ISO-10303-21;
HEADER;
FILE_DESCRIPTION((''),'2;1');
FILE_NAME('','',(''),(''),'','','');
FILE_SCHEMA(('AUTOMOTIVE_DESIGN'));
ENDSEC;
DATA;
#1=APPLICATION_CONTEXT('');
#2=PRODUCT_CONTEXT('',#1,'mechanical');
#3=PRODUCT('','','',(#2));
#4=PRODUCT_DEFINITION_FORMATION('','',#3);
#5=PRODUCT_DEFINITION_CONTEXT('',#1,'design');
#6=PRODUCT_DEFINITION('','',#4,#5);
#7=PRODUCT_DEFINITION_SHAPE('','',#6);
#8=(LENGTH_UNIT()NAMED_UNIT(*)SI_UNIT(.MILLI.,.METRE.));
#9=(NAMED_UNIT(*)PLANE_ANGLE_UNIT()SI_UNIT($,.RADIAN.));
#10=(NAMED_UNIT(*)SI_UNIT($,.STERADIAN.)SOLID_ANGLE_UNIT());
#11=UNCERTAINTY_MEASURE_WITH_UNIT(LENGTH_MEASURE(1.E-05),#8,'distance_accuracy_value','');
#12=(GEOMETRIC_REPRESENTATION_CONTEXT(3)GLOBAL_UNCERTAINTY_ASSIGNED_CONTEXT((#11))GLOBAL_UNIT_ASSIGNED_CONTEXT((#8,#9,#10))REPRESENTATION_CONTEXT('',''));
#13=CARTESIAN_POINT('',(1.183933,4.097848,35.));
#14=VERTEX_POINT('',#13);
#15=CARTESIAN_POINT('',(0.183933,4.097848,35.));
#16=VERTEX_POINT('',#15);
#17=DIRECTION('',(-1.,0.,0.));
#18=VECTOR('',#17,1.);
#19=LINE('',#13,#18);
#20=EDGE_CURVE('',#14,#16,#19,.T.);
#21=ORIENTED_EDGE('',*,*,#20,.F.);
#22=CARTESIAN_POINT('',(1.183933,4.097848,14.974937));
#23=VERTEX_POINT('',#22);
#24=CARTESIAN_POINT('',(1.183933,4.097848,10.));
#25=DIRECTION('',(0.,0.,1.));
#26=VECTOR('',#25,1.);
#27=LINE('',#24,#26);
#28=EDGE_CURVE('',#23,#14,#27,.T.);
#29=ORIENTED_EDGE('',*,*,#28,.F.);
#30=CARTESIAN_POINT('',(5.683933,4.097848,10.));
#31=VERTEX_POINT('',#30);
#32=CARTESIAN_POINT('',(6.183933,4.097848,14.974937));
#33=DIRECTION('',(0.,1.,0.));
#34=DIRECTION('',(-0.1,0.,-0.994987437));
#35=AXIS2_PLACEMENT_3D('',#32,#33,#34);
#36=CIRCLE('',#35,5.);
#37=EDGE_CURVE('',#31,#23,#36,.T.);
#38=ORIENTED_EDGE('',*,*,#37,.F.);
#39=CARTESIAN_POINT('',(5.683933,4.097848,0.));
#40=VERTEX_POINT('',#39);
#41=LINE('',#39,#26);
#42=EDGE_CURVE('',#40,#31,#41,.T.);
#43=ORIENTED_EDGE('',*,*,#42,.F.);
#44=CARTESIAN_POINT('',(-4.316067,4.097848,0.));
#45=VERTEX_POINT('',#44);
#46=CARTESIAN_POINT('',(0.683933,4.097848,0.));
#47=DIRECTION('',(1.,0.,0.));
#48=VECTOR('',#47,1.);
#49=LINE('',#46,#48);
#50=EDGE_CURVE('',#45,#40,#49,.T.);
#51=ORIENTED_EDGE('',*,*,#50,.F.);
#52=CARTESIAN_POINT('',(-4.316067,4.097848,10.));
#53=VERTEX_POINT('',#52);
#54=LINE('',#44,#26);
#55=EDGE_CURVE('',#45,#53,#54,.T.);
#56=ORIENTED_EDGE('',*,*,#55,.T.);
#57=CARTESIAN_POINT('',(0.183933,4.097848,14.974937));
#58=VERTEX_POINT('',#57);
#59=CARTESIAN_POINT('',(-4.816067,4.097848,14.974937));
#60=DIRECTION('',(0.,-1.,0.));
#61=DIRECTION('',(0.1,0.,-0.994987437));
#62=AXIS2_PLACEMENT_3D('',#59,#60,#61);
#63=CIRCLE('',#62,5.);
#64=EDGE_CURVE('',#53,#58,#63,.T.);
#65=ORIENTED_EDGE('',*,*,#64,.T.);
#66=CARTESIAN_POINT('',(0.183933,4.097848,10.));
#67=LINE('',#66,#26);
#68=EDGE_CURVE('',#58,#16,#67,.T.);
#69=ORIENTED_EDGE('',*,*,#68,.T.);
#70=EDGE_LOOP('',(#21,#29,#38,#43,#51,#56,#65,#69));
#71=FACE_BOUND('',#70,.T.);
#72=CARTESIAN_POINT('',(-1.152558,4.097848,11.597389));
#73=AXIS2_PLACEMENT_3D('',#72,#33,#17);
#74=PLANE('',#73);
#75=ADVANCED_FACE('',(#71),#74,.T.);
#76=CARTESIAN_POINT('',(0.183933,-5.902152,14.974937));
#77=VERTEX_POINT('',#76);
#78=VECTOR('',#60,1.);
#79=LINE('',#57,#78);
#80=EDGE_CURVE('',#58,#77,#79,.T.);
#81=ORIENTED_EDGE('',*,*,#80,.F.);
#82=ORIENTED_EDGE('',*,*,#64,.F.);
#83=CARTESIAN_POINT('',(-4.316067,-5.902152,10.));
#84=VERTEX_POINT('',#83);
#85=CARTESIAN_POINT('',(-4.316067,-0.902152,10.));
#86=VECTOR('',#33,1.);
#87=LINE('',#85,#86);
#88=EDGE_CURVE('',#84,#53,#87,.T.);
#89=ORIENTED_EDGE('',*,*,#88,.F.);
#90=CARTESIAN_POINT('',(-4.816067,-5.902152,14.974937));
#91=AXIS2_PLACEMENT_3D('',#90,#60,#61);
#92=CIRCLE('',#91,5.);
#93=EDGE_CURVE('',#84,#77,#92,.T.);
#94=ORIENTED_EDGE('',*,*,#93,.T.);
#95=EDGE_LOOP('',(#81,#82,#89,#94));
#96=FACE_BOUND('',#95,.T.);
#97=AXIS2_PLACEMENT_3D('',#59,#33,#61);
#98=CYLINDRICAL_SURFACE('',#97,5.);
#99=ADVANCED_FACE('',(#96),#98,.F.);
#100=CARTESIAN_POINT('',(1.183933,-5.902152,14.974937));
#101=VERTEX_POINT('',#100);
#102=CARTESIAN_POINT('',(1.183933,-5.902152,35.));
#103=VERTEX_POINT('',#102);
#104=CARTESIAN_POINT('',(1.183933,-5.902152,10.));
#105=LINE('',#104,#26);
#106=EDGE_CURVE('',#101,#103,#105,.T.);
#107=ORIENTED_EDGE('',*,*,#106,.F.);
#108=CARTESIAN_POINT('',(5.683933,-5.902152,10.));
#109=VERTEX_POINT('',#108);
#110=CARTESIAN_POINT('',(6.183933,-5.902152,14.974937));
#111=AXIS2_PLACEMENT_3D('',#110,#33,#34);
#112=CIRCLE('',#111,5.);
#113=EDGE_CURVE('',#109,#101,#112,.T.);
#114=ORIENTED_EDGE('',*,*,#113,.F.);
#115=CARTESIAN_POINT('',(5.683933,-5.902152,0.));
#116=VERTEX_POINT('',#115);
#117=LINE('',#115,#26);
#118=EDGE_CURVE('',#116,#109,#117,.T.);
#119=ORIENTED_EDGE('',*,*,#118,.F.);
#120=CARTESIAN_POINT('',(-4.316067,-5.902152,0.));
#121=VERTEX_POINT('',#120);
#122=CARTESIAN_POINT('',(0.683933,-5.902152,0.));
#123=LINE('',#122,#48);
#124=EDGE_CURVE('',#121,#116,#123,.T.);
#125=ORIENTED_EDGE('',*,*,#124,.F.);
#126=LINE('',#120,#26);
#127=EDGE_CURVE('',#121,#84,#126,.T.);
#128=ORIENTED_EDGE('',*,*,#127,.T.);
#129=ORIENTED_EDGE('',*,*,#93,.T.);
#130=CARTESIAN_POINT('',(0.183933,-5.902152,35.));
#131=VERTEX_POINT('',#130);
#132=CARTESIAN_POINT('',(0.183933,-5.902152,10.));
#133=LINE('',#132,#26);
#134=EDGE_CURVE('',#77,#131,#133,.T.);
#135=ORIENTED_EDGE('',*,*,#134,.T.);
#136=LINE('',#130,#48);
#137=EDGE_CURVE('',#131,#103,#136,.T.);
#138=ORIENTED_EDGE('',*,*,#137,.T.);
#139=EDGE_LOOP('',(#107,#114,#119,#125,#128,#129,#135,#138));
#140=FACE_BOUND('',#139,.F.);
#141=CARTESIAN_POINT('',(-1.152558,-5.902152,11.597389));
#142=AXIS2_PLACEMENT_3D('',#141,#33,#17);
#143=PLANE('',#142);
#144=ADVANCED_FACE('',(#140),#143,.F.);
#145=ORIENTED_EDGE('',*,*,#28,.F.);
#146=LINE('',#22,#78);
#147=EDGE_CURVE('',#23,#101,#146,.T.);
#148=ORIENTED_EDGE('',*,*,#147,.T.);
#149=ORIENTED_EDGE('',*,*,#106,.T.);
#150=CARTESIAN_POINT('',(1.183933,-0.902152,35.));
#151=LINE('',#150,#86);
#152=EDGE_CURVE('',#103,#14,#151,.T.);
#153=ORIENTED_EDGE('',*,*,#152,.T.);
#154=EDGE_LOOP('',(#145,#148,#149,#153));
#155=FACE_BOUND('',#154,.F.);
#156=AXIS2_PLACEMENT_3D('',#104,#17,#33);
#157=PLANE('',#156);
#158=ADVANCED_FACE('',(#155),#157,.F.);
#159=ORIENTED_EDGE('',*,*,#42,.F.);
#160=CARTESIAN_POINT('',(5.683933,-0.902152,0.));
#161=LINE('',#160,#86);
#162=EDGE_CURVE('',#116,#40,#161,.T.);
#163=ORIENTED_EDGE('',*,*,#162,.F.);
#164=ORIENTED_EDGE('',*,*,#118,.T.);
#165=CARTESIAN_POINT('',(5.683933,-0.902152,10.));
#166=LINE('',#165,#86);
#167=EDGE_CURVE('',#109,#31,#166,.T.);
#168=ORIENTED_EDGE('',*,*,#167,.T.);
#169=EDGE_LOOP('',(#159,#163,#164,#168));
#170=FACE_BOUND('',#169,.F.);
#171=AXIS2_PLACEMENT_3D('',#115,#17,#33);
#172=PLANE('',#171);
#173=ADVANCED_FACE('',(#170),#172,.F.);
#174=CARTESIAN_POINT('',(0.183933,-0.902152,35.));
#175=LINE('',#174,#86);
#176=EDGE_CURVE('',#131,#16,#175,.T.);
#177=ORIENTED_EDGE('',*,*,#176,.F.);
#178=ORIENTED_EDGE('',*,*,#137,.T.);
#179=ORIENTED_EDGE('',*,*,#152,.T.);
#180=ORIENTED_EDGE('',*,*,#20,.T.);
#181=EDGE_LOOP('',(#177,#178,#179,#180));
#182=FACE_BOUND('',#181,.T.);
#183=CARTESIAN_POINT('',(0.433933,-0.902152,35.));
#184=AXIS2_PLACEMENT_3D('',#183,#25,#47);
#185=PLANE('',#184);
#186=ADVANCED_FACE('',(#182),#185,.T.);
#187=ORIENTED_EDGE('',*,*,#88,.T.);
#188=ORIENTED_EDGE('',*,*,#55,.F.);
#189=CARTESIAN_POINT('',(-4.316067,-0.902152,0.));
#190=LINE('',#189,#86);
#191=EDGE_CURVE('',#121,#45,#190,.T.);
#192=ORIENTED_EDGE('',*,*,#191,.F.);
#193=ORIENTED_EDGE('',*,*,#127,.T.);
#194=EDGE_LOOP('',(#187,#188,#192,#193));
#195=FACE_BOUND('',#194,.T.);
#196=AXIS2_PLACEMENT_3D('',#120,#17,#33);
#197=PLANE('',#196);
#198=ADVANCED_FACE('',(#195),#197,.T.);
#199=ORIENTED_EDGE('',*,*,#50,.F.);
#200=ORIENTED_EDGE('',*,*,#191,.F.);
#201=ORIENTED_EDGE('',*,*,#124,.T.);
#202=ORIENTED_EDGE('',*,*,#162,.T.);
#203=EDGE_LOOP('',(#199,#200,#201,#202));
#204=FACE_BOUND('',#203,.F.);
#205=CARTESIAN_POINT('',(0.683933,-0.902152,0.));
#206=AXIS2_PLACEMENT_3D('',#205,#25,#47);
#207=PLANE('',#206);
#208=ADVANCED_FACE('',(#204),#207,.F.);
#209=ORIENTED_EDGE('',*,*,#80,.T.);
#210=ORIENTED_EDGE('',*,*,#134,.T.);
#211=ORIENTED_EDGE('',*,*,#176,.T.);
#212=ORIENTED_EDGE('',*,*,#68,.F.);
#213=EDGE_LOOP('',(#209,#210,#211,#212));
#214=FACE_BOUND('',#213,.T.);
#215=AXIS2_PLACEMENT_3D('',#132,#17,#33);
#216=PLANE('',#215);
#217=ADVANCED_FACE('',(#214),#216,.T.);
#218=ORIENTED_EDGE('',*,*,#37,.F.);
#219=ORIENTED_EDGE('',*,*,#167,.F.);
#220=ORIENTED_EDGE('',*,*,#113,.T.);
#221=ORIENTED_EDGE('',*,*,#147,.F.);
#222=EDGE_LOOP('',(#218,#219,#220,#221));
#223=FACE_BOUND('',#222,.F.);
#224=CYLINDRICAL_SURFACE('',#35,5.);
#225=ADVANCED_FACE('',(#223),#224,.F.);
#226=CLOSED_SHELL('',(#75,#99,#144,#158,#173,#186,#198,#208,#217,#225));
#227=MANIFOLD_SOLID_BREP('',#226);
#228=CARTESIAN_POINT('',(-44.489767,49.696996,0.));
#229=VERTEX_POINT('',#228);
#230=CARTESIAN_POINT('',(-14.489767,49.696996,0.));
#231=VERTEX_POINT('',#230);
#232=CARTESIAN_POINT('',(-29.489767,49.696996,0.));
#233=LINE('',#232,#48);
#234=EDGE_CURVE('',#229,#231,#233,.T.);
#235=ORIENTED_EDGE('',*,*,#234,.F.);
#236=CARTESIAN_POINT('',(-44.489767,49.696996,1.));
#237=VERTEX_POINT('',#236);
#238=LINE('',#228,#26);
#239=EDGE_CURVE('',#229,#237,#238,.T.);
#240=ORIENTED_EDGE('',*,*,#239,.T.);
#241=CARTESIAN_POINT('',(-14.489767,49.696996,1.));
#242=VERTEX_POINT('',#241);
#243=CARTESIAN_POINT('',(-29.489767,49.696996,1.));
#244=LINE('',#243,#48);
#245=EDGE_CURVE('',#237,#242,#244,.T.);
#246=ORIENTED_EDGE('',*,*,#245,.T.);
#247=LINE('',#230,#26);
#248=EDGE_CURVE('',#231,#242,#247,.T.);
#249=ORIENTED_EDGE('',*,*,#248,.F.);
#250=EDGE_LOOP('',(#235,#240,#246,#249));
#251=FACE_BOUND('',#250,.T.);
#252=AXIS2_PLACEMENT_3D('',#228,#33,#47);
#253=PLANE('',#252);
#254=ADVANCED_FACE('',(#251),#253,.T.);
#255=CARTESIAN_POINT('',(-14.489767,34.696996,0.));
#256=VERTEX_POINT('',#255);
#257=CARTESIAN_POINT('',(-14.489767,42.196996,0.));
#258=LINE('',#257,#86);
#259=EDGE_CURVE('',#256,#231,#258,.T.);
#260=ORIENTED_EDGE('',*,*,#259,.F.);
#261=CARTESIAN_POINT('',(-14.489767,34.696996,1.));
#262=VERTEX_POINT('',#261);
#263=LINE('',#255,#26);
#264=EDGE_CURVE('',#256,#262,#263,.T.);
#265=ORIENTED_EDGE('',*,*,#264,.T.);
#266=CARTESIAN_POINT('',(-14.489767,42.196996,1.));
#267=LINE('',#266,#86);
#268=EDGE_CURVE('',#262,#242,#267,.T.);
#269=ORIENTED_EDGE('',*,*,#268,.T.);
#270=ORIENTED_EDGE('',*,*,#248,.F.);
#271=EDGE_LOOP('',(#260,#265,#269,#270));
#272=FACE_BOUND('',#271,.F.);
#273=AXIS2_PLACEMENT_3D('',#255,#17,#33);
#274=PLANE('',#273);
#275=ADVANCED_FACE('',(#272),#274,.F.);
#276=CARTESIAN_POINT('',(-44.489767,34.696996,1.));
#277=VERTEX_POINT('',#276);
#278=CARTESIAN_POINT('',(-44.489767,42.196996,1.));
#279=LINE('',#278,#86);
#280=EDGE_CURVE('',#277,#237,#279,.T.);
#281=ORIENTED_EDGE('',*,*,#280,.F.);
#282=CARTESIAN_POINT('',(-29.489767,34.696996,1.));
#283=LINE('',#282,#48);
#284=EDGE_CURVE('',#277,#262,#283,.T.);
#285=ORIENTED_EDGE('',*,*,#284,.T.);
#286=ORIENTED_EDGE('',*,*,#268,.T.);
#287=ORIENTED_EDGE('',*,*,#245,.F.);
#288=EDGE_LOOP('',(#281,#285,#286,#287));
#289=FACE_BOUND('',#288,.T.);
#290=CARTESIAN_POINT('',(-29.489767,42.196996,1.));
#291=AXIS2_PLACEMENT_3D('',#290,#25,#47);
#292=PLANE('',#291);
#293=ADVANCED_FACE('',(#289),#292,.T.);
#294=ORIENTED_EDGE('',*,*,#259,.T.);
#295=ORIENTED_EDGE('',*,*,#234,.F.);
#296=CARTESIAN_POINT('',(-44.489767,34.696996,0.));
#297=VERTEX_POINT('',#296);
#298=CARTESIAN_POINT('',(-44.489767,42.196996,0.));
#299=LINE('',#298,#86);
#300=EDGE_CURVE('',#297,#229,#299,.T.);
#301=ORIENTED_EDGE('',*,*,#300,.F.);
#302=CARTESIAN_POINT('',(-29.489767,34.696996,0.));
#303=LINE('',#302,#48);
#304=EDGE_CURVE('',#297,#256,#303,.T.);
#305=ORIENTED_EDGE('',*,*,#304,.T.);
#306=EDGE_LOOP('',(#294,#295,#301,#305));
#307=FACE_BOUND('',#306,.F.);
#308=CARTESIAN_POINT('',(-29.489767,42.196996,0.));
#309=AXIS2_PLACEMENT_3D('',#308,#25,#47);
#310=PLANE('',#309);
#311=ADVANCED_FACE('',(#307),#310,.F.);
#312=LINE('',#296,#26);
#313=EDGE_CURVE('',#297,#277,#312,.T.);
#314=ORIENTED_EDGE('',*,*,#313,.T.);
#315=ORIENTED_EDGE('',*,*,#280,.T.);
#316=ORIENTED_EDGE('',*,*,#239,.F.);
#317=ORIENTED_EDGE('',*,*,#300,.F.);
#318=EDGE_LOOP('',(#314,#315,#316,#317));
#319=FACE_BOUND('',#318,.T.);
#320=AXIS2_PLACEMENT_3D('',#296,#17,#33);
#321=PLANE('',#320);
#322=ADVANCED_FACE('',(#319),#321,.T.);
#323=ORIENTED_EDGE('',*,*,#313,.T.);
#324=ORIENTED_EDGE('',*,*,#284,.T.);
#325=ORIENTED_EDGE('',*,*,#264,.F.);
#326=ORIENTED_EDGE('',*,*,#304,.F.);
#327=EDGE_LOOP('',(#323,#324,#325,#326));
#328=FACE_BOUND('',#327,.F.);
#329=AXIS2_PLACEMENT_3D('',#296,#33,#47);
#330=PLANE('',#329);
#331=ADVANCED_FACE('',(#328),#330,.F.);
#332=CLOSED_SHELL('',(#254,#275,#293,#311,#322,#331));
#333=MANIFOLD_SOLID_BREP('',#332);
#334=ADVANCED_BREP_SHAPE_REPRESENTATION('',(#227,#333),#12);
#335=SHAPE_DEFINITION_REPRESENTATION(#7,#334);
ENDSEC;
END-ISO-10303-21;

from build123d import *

# Parameters (mm, degrees)
F0_W        = 30
F0_H        = 15
F1_DEPTH    = 1
F2_W        = 10
F2_H        = 10
F3_DEPTH    = 10
F4_W        = 0.5
F4_H        = 10
F5_DEPTH    = 25
F6_T1_DEPTH = 10


# Not quite as in the source:
# - a fillet or chamfer that OpenCascade refuses, or shapes differently, is made with other operations: its cross-section is extruded or revolved along the edge and cut away or added


with BuildPart() as f1:
    # F0 (on Top) → F1 (new body)
    with BuildSketch(Plane.XY):
        with Locations((-29.4897666946, 42.1969963853)):
            Rectangle(F0_W, F0_H)
    extrude(amount=F1_DEPTH)


with BuildPart() as f3:
    # F2 (on Top) → F3 (new body)
    with BuildSketch(Plane.XY):
        with Locations((0.6839325652, -0.9021522023)):
            Rectangle(F2_W, F2_H)
    extrude(amount=F3_DEPTH)

    # F4 (on face) → F5 (join)
    with BuildSketch(Plane.XY.offset(10)):
        with Locations((0.4339325652, -0.9021522023)):
            Rectangle(F4_W, F4_H)
        with Locations((0.9339325652, -0.9021522023)):
            Rectangle(F4_W, F4_H)
    extrude(amount=F5_DEPTH)

    # F6: fillet of radius 5 on 2 edges, made by hand

    # F6_s2 → F6_t1 (join)
    with BuildSketch(Plane.XZ.offset(-4.0978477977)):
        with BuildLine():
            ThreePointArc((-4.3160674348, 10), (-1.1079681913, 11.6208352193), (0.1839325652, 14.9749371855))
            Line((0.1839325652, 14.9749371855), (0.1839325652, 10))
            Line((0.1839325652, 10), (-4.3160674348, 10))
        make_face()
        with BuildLine():
            ThreePointArc((5.6839325652, 10), (2.4758333216, 11.6208352193), (1.1839325652, 14.9749371855))
            Line((1.1839325652, 14.9749371855), (1.1839325652, 10))
            Line((1.1839325652, 10), (5.6839325652, 10))
        make_face()
    extrude(amount=F6_T1_DEPTH)


solid = Compound([f1.part, f3.part])
